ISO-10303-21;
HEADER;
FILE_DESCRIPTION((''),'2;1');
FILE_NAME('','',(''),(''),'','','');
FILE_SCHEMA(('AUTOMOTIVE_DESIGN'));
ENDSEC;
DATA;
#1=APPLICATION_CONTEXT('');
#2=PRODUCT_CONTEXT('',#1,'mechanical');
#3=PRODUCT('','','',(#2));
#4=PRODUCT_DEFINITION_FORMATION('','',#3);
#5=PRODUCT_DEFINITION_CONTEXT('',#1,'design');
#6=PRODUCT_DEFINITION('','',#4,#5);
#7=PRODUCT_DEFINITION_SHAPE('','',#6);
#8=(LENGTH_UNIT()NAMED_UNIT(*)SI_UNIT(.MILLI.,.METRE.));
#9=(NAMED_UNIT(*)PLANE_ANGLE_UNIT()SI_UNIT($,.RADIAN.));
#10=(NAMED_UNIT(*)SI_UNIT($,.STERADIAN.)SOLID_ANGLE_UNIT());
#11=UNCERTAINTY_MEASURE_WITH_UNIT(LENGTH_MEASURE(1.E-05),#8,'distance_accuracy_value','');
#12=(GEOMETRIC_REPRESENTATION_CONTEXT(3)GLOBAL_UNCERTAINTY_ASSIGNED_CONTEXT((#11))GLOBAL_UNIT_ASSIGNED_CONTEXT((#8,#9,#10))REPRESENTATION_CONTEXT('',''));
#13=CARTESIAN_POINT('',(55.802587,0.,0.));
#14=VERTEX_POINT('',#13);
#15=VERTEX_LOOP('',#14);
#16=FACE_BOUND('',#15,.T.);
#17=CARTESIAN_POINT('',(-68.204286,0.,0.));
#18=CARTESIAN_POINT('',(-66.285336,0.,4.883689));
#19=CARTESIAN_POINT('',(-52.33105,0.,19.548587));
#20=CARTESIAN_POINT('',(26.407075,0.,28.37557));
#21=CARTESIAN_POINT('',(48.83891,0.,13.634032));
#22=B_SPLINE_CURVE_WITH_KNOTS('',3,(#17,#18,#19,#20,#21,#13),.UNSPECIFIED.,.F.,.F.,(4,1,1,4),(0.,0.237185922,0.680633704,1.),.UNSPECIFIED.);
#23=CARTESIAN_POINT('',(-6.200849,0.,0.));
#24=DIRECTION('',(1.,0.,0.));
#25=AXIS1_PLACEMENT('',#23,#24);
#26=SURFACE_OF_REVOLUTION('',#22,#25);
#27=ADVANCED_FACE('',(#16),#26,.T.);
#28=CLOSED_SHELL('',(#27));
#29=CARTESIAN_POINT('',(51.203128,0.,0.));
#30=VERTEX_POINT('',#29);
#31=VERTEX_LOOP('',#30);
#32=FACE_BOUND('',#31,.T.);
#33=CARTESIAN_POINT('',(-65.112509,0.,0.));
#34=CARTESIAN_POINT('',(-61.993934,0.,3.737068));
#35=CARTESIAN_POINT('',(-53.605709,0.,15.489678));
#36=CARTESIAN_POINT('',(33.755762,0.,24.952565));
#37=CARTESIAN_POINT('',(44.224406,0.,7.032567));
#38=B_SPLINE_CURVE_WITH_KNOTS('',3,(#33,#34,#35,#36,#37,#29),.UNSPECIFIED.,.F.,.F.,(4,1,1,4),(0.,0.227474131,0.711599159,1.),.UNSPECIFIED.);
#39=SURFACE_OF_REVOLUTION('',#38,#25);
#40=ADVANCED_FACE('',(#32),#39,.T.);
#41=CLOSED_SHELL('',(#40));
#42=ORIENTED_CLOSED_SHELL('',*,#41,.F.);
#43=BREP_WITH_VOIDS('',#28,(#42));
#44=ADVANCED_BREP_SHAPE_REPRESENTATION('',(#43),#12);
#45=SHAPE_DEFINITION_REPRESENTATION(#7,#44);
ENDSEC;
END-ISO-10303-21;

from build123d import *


with BuildPart() as f1:
    # F0 (on Front) → F1 (revolve)
    with BuildSketch(Plane.XZ):
        with BuildLine():
            add(Edge.make_bspline(
                [(-68.2042856836, 0), (-66.2853355341, 4.883688723), (-52.3310504766, 19.5485870419), (26.4070749094, 28.3755696825), (48.8389097154, 13.6340316385), (55.802586889, 0)],
                knots=[0, 0, 0, 0, 0.2371859218, 0.6806337043, 1, 1, 1, 1], degree=3))
            Line((-68.2042856836, 0), (-65.1125088334, 0))
            add(Edge.make_bspline(
                [(-65.1125088334, 0), (-61.9939343728, 3.737067747), (-53.6057089924, 15.4896776572), (33.7557618039, 24.9525646316), (44.2244058733, 7.0325665769), (51.2031279504, 0)],
                knots=[0, 0, 0, 0, 0.2274741313, 0.7115991588, 1, 1, 1, 1], degree=3))
            Line((51.2031279504, 0), (55.802586889, 0))
        make_face()
    revolve(axis=Axis((-6.2008493973, 0, 0), (1, 0, 0)))


solid = f1.part
